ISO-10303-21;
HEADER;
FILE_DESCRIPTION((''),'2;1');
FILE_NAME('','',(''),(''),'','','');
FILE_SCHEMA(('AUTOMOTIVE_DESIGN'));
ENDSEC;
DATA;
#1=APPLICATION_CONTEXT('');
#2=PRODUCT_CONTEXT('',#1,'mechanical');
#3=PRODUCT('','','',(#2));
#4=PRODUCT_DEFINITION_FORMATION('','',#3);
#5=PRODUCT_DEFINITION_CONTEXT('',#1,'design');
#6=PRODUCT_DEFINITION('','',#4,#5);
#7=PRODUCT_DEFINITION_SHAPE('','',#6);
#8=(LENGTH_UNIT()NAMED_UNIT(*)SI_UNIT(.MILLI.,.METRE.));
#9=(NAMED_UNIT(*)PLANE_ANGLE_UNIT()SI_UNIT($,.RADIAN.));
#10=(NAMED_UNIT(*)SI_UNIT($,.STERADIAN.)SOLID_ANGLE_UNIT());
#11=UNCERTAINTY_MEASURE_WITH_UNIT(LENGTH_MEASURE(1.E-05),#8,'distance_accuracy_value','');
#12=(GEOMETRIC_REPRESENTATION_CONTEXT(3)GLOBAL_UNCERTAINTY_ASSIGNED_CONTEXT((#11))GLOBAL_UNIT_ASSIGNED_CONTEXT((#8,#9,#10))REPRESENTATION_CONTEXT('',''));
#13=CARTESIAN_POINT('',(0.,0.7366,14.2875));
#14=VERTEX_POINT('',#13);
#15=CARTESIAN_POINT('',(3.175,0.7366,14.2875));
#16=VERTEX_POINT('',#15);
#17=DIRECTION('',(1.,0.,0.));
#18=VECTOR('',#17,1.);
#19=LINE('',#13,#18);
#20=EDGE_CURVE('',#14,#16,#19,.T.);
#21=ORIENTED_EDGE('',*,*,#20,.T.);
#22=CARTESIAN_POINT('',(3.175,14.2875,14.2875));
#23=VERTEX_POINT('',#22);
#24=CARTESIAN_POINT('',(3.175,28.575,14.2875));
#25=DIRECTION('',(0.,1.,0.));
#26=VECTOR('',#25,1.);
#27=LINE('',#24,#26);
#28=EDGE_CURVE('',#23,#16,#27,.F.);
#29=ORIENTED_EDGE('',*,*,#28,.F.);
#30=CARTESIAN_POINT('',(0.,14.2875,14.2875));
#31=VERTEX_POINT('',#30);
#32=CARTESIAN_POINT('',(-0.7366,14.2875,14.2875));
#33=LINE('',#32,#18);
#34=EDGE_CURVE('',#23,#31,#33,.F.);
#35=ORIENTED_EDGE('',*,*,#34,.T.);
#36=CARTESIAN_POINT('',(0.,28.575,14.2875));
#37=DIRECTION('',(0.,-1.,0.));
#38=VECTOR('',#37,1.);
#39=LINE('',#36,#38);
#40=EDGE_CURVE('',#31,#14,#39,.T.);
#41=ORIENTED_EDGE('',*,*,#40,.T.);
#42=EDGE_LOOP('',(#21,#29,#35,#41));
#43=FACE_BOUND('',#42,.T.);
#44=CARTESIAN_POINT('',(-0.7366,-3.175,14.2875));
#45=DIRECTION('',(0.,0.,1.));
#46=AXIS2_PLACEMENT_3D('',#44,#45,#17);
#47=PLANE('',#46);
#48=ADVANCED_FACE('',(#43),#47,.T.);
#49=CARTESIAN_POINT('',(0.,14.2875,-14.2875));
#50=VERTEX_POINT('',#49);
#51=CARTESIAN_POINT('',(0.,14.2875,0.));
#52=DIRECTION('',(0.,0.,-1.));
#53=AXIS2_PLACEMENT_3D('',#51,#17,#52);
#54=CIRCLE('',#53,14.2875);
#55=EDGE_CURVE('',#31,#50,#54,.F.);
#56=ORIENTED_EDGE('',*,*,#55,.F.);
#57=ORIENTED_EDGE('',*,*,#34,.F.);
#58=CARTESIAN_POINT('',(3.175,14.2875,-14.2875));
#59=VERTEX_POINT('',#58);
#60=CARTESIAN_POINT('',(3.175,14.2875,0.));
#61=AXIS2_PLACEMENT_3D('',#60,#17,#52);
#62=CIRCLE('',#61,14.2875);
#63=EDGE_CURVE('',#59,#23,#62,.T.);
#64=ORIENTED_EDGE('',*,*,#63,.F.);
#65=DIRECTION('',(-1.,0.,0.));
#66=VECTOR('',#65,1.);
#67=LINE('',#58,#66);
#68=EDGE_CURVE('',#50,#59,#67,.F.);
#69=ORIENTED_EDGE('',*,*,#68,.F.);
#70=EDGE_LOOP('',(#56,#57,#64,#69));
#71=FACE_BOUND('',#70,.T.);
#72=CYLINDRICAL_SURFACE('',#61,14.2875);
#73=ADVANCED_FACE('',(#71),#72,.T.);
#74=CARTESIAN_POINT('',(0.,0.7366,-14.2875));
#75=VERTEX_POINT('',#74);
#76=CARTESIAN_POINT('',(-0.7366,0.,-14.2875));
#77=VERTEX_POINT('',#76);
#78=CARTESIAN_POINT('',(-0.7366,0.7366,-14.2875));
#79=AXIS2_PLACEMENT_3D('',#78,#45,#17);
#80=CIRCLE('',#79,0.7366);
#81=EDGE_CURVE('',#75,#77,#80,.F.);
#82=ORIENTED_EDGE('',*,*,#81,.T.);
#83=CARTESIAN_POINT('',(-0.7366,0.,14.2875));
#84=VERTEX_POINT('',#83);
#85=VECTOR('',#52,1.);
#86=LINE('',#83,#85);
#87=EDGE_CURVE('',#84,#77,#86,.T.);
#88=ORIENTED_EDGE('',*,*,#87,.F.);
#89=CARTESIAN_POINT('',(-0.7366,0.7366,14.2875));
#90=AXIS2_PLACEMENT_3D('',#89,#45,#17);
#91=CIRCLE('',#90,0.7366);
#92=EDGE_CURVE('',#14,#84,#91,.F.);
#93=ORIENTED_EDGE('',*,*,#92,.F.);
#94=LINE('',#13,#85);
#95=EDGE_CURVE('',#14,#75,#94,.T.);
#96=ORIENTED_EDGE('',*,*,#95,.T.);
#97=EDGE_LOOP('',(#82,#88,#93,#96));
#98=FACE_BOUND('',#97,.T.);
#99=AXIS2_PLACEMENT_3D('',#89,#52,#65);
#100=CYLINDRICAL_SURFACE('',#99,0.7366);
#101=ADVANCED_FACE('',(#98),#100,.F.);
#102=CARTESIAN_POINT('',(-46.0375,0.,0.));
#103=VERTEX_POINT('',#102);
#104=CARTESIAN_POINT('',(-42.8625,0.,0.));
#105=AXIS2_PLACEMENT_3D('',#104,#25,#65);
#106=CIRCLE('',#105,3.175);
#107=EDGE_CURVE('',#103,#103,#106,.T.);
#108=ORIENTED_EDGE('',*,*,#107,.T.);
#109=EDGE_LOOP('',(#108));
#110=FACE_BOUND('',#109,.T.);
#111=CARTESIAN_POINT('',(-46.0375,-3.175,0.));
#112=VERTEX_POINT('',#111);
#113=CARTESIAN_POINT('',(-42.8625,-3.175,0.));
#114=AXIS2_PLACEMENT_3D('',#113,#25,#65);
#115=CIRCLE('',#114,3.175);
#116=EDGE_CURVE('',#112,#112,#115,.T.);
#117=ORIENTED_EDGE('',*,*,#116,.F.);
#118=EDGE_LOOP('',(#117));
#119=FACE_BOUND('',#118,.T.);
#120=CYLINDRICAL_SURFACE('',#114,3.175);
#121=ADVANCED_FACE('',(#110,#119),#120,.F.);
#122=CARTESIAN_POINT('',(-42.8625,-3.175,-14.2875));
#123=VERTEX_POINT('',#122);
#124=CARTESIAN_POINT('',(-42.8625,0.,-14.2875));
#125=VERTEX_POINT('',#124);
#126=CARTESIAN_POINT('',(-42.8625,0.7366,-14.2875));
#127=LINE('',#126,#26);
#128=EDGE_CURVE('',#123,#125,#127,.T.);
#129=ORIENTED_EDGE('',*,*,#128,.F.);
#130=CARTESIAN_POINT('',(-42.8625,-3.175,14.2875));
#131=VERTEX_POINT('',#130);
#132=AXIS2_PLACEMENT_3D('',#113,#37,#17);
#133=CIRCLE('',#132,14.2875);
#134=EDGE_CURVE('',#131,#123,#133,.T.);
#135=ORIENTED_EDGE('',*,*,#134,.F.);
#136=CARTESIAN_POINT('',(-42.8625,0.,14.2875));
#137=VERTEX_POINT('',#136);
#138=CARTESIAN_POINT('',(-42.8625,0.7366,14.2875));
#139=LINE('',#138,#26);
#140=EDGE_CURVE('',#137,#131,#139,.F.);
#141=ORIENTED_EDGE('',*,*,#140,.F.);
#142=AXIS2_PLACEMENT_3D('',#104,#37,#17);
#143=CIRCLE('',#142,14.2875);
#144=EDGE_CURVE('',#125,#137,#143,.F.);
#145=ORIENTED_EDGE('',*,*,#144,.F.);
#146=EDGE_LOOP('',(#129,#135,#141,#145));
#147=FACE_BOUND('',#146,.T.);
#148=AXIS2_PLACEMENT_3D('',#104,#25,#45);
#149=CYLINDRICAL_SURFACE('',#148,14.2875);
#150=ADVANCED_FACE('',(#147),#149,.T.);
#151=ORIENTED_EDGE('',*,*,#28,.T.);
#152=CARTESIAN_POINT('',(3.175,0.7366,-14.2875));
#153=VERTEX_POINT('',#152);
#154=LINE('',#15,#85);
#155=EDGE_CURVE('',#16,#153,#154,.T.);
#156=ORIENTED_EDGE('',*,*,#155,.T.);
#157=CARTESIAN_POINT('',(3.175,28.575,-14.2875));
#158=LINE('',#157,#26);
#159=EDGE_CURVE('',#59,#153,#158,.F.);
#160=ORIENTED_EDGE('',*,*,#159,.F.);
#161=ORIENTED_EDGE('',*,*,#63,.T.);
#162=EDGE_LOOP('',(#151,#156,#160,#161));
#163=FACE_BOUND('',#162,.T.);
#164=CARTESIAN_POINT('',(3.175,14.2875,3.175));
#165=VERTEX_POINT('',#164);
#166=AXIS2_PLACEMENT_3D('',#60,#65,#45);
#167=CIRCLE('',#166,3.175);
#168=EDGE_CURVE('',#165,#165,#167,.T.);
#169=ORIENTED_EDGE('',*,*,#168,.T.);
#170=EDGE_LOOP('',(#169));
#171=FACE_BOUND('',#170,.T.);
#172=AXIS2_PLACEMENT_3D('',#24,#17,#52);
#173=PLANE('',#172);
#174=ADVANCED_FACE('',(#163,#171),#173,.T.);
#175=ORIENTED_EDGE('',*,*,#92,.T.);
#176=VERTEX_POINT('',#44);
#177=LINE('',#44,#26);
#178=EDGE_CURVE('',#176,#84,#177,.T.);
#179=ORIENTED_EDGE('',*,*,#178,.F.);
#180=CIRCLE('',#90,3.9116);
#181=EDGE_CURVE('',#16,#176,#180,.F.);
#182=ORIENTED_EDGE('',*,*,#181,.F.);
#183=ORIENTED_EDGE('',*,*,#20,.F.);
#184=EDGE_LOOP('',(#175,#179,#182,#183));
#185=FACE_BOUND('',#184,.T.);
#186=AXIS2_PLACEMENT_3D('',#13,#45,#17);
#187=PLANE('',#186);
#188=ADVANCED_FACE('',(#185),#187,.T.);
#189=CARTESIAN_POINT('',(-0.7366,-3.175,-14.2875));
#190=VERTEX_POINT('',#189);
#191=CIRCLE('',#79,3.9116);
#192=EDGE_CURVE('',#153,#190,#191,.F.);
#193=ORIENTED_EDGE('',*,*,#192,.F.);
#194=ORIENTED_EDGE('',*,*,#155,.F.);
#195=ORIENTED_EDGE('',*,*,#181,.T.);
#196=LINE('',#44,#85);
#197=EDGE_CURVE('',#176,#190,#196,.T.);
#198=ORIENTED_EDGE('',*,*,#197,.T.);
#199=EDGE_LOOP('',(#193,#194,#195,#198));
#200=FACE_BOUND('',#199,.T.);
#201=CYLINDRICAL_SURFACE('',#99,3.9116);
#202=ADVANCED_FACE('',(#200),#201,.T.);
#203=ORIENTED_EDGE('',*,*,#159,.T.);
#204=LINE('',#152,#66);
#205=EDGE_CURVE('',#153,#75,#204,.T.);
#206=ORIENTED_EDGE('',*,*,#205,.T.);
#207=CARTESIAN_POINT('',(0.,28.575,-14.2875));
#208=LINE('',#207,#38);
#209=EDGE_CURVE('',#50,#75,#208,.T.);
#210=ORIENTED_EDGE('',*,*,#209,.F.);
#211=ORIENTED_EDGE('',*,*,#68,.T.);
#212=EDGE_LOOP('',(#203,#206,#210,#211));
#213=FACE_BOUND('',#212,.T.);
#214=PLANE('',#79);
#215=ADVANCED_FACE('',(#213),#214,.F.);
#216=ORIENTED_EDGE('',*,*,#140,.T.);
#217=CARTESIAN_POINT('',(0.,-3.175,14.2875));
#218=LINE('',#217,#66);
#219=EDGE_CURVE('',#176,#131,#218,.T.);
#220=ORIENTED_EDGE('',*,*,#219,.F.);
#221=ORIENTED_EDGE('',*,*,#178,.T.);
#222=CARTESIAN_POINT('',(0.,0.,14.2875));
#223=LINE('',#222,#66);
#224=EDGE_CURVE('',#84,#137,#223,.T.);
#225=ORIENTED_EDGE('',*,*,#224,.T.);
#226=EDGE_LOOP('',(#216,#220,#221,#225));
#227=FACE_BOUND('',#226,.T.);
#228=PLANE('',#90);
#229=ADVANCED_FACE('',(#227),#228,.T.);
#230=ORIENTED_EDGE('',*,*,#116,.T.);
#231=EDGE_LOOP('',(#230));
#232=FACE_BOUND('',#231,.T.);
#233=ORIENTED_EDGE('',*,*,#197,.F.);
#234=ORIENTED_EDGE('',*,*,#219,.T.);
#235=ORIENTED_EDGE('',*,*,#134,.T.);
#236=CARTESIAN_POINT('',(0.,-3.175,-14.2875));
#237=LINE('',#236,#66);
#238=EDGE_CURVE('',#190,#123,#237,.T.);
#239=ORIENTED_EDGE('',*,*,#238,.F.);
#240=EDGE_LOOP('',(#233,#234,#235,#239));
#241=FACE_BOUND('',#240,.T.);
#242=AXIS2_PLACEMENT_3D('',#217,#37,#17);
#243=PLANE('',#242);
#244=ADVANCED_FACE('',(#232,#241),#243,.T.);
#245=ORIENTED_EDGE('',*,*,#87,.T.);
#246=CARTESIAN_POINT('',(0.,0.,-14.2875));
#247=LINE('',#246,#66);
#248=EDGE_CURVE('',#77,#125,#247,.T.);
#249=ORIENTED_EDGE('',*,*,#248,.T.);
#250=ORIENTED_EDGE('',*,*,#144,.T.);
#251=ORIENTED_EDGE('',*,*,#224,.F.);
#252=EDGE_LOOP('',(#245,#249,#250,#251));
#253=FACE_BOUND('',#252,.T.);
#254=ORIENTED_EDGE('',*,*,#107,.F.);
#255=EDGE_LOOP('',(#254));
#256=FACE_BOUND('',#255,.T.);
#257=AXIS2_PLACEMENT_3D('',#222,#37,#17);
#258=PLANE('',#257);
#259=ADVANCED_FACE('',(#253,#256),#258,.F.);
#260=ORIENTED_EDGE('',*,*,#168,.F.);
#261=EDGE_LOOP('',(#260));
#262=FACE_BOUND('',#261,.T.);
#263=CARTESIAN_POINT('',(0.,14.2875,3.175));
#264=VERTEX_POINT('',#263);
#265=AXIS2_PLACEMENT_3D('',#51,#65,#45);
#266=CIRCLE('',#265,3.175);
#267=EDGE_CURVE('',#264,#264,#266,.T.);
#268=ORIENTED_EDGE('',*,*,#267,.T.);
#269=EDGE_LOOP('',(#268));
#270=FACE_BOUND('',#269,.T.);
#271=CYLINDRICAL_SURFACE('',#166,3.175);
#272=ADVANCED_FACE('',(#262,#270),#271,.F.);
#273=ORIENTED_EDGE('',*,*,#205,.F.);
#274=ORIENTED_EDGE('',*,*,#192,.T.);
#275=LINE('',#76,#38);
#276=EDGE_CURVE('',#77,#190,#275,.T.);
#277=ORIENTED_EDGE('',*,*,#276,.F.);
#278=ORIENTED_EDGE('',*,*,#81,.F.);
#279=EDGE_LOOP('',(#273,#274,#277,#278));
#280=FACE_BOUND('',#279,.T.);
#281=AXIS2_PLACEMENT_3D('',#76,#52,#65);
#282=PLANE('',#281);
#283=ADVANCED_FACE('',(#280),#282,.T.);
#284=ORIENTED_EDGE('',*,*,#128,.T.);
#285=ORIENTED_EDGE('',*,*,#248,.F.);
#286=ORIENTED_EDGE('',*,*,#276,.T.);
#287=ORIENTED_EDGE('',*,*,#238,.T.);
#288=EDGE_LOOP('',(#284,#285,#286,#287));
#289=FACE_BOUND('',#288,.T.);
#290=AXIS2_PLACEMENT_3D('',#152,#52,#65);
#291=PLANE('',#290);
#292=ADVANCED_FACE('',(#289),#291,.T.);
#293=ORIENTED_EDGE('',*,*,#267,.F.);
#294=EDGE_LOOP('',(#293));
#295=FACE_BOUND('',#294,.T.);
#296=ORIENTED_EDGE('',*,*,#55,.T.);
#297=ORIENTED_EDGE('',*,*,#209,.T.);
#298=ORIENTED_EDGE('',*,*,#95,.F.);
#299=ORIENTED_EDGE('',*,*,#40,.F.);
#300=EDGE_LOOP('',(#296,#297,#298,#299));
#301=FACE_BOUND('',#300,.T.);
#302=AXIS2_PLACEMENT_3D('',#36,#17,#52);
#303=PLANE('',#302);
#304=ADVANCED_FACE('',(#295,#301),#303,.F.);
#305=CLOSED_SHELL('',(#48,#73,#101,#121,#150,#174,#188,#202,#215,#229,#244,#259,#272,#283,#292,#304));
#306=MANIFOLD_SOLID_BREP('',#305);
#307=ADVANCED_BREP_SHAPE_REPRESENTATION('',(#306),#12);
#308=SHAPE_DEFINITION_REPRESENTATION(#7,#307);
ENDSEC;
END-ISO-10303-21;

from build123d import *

# Parameters (mm, degrees)
BASE_FLANGE1_DEPTH = 14.2875
SKETCH6_R          = 3.175
CUT_EXTRUDE1_DEPTH = 66.473550242
SKETCH7_R          = 3.175
CUT_EXTRUDE2_DEPTH = 66.473550242
FILLET2_RADIUS     = 14.2875
FILLET2_LENGTH     = 3.175
FILLET3_RADIUS     = 14.2875
FILLET3_LENGTH     = 3.175


# Sheet-metal steps are written as plain solids
with BuildPart() as part:
    # Sketch1 → Base-Flange1 (new, symmetric)
    with BuildSketch(Plane.XY):
        with BuildLine():
            Line((0, 28.575), (0, 0.7366))
            ThreePointArc((0, 0.7366), (-0.215745145, 0.215745145), (-0.7366, 0))
            Line((-0.7366, 0), (-57.15, 0))
            Line((-57.15, 0), (-57.15, -3.175))
            Line((-57.15, -3.175), (-0.7366, -3.175))
            ThreePointArc((-0.7366, -3.175), (2.029318885, -2.029318885), (3.175, 0.7366))
            Line((3.175, 0.7366), (3.175, 28.575))
            Line((3.175, 28.575), (0, 28.575))
        make_face()
    extrude(amount=BASE_FLANGE1_DEPTH, both=True)

    # Sketch6 → Cut-Extrude1 (cut, through all)
    with BuildSketch(Plane(origin=(0, 0, 0), x_dir=(1, 0, 0), z_dir=(0, 1, 0))):
        with Locations(Location((-42.8625, 0, 0), (0, 0, 180))):
            Circle(SKETCH6_R)
    extrude(amount=-CUT_EXTRUDE1_DEPTH, mode=Mode.SUBTRACT)

    # Sketch7 → Cut-Extrude2 (cut, through all)
    with BuildSketch(Plane.ZY):
        with Locations((0, 14.2875)):
            Circle(SKETCH7_R)
    extrude(amount=-CUT_EXTRUDE2_DEPTH, mode=Mode.SUBTRACT)

    # Fillet2: full round fillet: the end face becomes a half cylinder, R = half its width
    fillet2_face = Plane((-57.15, -1.5875, 0), x_dir=(0, 1, 0), z_dir=(-1, 0, 0))  # on the end face: x along it, z out of the body
    fillet2_slab = fillet2_face.offset(-FILLET2_RADIUS / 2) * Box(FILLET2_LENGTH, 2 * FILLET2_RADIUS, FILLET2_RADIUS, mode=Mode.PRIVATE)  # the body's end, R deep
    fillet2_round = Plane((-42.8625, -1.5875, 0), x_dir=(-1, 0, 0), z_dir=(0, 1, 0)) * Cylinder(FILLET2_RADIUS, FILLET2_LENGTH, mode=Mode.PRIVATE)  # its axis R under the face
    add(fillet2_slab - fillet2_round, mode=Mode.SUBTRACT)

    # Fillet3: full round fillet: the end face becomes a half cylinder, R = half its width
    fillet3_face = Plane((1.5875, 28.575, 0), x_dir=(1, 0, 0), z_dir=(0, 1, 0))  # on the end face: x along it, z out of the body
    fillet3_slab = fillet3_face.offset(-FILLET3_RADIUS / 2) * Box(FILLET3_LENGTH, 2 * FILLET3_RADIUS, FILLET3_RADIUS, mode=Mode.PRIVATE)  # the body's end, R deep
    fillet3_round = Plane((1.5875, 14.2875, 0), x_dir=(0, 1, 0), z_dir=(1, 0, 0)) * Cylinder(FILLET3_RADIUS, FILLET3_LENGTH, mode=Mode.PRIVATE)  # its axis R under the face
    add(fillet3_slab - fillet3_round, mode=Mode.SUBTRACT)


solid = part.part
